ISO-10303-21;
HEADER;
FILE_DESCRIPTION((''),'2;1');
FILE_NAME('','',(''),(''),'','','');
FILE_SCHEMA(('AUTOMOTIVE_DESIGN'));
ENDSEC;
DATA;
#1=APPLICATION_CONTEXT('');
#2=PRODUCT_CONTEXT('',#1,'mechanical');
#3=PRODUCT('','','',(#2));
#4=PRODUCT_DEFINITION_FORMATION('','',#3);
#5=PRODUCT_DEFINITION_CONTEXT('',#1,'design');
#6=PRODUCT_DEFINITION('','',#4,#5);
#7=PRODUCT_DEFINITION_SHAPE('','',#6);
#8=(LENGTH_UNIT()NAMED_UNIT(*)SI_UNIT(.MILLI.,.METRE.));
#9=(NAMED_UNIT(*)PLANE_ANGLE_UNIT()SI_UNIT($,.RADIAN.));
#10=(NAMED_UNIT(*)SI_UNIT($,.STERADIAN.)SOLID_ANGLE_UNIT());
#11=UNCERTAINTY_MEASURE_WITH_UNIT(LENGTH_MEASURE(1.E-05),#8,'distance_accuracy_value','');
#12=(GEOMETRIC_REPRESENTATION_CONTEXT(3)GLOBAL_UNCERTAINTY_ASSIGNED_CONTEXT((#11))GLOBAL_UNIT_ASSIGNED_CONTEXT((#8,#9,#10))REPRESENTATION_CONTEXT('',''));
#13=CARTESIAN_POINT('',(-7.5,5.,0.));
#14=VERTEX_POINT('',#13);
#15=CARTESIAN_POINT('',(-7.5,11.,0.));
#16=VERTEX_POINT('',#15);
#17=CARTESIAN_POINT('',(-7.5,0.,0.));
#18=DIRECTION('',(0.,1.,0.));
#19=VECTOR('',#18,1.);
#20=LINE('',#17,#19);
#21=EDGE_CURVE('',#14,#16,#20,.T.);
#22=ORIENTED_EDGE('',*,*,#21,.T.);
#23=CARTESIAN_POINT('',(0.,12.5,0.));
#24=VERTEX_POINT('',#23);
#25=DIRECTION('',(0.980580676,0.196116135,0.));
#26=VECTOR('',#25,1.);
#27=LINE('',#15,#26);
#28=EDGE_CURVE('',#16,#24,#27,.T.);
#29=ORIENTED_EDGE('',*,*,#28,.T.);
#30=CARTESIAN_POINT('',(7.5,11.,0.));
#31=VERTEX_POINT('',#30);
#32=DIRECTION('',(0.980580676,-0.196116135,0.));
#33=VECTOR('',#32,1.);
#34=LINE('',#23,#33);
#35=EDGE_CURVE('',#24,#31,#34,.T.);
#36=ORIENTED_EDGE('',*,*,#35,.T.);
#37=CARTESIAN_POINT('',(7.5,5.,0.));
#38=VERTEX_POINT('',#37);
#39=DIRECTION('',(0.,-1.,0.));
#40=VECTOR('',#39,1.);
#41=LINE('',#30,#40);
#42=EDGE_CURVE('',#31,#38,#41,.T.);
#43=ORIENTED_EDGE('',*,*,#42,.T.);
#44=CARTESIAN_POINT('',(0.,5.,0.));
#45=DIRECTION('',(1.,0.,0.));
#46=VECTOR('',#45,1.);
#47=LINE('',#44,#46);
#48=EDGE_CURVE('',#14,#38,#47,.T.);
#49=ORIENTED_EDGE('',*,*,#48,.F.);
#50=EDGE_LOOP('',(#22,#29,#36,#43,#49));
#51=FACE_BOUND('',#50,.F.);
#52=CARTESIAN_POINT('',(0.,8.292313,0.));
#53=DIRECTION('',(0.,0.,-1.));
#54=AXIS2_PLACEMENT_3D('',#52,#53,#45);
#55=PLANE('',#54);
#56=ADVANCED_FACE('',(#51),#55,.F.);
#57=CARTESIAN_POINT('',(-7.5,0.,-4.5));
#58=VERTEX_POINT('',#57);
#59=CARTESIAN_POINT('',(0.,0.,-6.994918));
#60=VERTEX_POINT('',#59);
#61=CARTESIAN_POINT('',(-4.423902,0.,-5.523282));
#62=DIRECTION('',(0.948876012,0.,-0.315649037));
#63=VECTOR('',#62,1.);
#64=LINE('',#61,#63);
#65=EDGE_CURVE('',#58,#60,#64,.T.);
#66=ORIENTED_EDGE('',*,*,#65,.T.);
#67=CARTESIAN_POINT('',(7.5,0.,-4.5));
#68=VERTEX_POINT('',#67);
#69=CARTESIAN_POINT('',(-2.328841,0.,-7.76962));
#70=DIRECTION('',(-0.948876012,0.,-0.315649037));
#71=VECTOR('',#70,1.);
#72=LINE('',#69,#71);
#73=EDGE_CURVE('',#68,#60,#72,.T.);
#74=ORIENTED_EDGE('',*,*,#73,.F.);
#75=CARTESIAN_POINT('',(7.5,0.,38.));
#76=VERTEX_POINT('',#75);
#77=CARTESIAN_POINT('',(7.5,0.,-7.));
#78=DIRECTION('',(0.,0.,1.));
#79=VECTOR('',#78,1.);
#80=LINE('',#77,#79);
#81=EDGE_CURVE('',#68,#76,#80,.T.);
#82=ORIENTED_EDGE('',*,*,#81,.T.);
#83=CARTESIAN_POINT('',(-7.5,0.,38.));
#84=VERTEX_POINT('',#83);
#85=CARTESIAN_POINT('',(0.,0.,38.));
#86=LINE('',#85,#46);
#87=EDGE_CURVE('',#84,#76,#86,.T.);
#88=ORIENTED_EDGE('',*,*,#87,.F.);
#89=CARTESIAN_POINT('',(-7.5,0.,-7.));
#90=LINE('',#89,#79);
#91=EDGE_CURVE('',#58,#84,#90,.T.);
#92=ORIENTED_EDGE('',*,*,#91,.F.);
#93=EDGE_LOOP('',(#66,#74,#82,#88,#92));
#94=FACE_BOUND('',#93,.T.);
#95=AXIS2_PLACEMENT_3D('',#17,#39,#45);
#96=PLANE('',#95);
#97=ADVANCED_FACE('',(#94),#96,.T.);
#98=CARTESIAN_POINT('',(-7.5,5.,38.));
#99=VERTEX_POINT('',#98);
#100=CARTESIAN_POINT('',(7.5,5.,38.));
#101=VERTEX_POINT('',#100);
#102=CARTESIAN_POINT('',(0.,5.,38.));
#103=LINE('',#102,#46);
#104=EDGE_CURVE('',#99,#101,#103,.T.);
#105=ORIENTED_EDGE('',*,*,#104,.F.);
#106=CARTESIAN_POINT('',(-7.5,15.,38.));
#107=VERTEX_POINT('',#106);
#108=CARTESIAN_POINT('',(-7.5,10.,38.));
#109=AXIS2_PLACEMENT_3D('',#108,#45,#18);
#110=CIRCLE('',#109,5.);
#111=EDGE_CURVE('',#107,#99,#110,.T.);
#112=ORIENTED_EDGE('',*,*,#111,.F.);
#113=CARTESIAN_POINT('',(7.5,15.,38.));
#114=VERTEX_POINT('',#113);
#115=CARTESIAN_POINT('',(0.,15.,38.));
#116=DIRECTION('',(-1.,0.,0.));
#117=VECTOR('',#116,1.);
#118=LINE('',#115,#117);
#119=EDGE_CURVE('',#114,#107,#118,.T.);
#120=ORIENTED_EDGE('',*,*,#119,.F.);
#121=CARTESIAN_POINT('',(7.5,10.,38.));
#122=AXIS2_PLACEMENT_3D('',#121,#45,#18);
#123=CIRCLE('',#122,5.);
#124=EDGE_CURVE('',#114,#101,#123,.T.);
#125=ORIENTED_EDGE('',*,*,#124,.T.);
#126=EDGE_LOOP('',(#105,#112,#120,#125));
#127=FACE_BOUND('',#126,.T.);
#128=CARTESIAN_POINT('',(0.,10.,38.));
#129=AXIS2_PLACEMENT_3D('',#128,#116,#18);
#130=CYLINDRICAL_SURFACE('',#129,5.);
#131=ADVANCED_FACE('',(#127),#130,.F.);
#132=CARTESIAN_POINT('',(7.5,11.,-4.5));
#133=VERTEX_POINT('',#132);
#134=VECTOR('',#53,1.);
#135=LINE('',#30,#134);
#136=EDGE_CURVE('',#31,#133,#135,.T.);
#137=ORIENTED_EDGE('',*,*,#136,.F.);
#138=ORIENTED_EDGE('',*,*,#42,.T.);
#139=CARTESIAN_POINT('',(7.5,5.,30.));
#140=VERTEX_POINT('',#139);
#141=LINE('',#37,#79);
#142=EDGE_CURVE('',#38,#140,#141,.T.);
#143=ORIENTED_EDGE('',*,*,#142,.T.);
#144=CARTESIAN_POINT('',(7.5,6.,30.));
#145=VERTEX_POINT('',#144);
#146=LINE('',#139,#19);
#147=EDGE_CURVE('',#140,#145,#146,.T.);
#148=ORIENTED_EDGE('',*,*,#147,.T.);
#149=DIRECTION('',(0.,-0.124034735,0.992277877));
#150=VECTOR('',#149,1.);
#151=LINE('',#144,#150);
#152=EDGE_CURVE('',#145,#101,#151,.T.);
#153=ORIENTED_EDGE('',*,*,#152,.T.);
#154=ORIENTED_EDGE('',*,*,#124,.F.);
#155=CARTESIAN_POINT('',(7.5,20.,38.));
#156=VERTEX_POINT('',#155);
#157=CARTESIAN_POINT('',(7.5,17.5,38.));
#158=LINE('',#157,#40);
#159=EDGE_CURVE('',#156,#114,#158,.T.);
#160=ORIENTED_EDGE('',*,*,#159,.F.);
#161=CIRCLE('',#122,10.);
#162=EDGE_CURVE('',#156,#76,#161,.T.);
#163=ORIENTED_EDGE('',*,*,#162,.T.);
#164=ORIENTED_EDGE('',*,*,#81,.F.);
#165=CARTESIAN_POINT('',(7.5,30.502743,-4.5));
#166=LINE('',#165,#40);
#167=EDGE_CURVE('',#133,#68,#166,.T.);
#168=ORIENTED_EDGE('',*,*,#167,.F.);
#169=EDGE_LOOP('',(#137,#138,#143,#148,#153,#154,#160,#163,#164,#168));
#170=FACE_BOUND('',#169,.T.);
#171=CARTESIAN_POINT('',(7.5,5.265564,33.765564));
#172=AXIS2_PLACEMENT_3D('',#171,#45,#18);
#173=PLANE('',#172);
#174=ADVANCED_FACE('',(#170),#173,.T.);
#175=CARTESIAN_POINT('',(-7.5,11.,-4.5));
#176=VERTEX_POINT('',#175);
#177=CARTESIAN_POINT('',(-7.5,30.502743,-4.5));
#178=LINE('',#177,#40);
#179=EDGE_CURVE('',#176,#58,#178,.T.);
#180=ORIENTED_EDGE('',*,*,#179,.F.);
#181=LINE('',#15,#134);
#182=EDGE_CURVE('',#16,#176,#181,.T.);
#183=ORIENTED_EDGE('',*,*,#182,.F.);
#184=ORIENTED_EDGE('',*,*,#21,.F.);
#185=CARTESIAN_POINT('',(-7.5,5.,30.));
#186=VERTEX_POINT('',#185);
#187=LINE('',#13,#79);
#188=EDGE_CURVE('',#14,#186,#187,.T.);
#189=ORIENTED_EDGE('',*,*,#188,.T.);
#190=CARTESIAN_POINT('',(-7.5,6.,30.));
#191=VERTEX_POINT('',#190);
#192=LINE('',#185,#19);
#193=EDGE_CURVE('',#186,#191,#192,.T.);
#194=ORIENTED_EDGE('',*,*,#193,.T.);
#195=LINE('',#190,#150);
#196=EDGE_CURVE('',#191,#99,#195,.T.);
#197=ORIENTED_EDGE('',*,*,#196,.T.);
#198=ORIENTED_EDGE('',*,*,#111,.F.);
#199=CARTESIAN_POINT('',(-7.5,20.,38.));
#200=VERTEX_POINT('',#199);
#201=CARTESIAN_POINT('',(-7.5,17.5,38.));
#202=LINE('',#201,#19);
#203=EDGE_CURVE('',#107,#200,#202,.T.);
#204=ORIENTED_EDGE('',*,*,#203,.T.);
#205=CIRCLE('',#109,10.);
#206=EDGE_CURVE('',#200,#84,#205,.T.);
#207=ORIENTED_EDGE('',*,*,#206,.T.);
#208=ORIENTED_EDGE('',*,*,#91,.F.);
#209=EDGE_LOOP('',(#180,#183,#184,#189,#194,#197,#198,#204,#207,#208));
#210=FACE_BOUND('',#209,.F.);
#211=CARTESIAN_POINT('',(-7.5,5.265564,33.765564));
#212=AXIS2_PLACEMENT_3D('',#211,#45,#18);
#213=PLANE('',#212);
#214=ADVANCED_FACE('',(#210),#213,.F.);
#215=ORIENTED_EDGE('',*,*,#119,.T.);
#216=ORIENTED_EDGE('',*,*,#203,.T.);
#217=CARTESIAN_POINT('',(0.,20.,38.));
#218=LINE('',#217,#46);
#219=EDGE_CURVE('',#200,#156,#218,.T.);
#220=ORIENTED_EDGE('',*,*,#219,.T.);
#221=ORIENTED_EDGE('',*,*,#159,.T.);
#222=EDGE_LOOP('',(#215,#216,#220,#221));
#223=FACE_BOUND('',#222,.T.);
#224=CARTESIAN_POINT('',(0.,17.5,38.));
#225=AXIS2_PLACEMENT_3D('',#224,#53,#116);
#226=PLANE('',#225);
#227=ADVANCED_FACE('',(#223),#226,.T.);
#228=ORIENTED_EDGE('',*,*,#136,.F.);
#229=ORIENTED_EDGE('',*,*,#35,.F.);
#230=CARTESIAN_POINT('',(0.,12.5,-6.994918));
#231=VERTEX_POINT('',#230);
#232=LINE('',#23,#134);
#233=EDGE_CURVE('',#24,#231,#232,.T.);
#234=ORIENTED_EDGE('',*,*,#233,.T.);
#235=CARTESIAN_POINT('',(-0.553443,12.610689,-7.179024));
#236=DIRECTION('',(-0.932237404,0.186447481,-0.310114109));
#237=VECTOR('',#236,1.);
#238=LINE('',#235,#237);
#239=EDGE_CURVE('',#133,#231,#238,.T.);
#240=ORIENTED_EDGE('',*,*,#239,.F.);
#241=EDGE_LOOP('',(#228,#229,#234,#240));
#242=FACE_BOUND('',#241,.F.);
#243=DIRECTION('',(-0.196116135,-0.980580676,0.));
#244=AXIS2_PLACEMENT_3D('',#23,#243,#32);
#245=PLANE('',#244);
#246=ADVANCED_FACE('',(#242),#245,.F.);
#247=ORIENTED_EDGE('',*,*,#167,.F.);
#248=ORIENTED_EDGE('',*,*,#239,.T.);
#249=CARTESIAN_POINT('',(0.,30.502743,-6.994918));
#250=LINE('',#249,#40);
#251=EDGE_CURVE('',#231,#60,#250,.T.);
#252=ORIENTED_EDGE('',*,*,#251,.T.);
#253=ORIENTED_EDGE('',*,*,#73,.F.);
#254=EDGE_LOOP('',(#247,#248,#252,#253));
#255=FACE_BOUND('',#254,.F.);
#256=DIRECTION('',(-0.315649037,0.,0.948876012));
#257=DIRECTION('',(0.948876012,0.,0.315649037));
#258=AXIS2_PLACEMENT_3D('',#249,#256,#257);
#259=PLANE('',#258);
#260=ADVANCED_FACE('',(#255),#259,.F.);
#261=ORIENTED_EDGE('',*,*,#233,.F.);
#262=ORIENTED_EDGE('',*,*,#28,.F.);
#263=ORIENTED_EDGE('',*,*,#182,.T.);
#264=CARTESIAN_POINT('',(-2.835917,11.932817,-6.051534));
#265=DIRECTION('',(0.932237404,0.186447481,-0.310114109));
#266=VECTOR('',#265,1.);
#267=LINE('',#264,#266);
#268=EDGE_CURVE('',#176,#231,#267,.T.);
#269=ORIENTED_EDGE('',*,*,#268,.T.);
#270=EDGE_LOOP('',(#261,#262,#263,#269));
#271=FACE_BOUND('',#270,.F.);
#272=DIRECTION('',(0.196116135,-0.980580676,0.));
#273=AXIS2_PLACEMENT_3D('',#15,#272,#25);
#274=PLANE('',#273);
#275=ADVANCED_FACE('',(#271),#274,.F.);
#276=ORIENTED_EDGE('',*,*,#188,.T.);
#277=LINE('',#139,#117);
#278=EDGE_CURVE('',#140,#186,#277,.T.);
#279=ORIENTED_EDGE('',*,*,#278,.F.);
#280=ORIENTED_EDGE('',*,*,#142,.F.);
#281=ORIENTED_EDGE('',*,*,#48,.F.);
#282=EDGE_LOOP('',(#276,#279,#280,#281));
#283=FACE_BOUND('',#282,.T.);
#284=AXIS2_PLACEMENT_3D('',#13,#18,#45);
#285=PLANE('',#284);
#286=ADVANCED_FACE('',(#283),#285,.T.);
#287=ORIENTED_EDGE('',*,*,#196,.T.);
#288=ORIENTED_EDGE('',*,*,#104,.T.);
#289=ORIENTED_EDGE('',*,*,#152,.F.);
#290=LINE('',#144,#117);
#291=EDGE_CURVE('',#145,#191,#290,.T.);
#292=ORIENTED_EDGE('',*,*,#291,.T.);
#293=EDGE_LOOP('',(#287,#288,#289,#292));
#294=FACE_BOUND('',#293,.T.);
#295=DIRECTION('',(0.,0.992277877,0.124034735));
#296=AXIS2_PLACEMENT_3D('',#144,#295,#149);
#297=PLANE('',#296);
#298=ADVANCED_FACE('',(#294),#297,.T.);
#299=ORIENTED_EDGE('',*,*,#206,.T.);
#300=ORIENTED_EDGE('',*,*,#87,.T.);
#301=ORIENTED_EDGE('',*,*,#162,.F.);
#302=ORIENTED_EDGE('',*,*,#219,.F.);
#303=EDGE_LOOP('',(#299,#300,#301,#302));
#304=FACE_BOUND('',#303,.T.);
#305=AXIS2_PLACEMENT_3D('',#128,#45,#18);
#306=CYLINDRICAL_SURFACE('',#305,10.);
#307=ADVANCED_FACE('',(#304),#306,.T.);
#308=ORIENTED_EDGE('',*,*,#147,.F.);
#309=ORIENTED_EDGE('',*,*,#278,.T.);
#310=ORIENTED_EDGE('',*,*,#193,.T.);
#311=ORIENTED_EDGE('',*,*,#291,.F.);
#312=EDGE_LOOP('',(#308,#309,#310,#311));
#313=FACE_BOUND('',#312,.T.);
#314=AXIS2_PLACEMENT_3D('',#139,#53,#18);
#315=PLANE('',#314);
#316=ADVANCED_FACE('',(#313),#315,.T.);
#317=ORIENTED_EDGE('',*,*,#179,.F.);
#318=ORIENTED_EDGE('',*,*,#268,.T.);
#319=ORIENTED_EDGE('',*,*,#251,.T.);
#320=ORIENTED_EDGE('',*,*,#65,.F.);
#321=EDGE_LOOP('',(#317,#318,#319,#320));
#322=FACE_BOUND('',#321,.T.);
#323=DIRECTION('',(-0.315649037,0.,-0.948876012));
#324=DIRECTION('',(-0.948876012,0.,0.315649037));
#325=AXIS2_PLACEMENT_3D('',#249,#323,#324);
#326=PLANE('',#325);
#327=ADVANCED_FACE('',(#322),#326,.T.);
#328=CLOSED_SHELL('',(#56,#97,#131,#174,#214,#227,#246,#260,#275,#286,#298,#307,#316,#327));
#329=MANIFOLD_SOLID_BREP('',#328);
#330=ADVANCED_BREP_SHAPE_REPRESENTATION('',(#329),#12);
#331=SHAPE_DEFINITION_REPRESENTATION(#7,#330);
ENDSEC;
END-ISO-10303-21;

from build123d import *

# Parameters (mm, degrees)
F0_W        = 15
F0_H        = 5
F1_DEPTH    = 38
F2_W        = 15
F2_H        = 5
F3_DEPTH    = 7
F4_T1_DEPTH = 50.0054850444
F1_FACE1_W  = 15
F1_FACE1_H  = 5
F8_DEPTH    = 15


# Not quite as in the source:
# - a fillet or chamfer that OpenCascade refuses, or shapes differently, is made with other operations: its cross-section is extruded or revolved along the edge and cut away or added


with BuildPart() as f1:
    # F0 (on Top) → F1 (new body)
    with BuildSketch(Plane.XY):
        with Locations((0, 2.5)):
            Rectangle(F0_W, F0_H)
    extrude(amount=F1_DEPTH)

    # F2 (on face) → F3 (join)
    with BuildSketch(Plane(origin=(0, 0, 0), x_dir=(1, 0, 0), z_dir=(0, 0, -1))):
        Polygon((7.5, -10), (7.5, -5), (-7.5, -5), (-7.5, -10), (-7.5, -11), (0, -12.5), (7.5, -11), align=None)
        with Locations((0, -2.5)):
            Rectangle(F2_W, F2_H)
    extrude(amount=F3_DEPTH)

    # F4: chamfer of 2.5 x 7.5152772587 on 2 edges, made by hand

    # F4_s2 → F4_t1 (cut)
    with BuildSketch(Plane.XZ.offset(-30.5027425222)):
        Polygon((0.0152772587, -7), (-7.5, -4.5), (-7.5, -7), align=None)
        Polygon((-0.0152772587, -7), (7.5, -4.5), (7.5, -7), align=None)
    extrude(amount=F4_T1_DEPTH, mode=Mode.SUBTRACT)

    # F6: sweep along a path in F5
    with BuildLine(Plane.YZ.offset(7.5)) as f6_path:
        ThreePointArc((17.5, 38), (10, 45.5), (2.5, 38))
    # F1_face1 (on face) → F6 (sweep)
    with BuildSketch(Plane(origin=(0, 2.5, 38), x_dir=(1, 0, 0), z_dir=(0, 0, 1))):
        Rectangle(F1_FACE1_W, F1_FACE1_H)
    sweep(path=f6_path.line)

    # F7 (on face) → F8 (join)
    with BuildSketch(Plane.YZ.offset(7.5)):
        Polygon((6, 30), (5, 38), (5, 30), align=None)
    extrude(amount=-F8_DEPTH)


solid = f1.part
